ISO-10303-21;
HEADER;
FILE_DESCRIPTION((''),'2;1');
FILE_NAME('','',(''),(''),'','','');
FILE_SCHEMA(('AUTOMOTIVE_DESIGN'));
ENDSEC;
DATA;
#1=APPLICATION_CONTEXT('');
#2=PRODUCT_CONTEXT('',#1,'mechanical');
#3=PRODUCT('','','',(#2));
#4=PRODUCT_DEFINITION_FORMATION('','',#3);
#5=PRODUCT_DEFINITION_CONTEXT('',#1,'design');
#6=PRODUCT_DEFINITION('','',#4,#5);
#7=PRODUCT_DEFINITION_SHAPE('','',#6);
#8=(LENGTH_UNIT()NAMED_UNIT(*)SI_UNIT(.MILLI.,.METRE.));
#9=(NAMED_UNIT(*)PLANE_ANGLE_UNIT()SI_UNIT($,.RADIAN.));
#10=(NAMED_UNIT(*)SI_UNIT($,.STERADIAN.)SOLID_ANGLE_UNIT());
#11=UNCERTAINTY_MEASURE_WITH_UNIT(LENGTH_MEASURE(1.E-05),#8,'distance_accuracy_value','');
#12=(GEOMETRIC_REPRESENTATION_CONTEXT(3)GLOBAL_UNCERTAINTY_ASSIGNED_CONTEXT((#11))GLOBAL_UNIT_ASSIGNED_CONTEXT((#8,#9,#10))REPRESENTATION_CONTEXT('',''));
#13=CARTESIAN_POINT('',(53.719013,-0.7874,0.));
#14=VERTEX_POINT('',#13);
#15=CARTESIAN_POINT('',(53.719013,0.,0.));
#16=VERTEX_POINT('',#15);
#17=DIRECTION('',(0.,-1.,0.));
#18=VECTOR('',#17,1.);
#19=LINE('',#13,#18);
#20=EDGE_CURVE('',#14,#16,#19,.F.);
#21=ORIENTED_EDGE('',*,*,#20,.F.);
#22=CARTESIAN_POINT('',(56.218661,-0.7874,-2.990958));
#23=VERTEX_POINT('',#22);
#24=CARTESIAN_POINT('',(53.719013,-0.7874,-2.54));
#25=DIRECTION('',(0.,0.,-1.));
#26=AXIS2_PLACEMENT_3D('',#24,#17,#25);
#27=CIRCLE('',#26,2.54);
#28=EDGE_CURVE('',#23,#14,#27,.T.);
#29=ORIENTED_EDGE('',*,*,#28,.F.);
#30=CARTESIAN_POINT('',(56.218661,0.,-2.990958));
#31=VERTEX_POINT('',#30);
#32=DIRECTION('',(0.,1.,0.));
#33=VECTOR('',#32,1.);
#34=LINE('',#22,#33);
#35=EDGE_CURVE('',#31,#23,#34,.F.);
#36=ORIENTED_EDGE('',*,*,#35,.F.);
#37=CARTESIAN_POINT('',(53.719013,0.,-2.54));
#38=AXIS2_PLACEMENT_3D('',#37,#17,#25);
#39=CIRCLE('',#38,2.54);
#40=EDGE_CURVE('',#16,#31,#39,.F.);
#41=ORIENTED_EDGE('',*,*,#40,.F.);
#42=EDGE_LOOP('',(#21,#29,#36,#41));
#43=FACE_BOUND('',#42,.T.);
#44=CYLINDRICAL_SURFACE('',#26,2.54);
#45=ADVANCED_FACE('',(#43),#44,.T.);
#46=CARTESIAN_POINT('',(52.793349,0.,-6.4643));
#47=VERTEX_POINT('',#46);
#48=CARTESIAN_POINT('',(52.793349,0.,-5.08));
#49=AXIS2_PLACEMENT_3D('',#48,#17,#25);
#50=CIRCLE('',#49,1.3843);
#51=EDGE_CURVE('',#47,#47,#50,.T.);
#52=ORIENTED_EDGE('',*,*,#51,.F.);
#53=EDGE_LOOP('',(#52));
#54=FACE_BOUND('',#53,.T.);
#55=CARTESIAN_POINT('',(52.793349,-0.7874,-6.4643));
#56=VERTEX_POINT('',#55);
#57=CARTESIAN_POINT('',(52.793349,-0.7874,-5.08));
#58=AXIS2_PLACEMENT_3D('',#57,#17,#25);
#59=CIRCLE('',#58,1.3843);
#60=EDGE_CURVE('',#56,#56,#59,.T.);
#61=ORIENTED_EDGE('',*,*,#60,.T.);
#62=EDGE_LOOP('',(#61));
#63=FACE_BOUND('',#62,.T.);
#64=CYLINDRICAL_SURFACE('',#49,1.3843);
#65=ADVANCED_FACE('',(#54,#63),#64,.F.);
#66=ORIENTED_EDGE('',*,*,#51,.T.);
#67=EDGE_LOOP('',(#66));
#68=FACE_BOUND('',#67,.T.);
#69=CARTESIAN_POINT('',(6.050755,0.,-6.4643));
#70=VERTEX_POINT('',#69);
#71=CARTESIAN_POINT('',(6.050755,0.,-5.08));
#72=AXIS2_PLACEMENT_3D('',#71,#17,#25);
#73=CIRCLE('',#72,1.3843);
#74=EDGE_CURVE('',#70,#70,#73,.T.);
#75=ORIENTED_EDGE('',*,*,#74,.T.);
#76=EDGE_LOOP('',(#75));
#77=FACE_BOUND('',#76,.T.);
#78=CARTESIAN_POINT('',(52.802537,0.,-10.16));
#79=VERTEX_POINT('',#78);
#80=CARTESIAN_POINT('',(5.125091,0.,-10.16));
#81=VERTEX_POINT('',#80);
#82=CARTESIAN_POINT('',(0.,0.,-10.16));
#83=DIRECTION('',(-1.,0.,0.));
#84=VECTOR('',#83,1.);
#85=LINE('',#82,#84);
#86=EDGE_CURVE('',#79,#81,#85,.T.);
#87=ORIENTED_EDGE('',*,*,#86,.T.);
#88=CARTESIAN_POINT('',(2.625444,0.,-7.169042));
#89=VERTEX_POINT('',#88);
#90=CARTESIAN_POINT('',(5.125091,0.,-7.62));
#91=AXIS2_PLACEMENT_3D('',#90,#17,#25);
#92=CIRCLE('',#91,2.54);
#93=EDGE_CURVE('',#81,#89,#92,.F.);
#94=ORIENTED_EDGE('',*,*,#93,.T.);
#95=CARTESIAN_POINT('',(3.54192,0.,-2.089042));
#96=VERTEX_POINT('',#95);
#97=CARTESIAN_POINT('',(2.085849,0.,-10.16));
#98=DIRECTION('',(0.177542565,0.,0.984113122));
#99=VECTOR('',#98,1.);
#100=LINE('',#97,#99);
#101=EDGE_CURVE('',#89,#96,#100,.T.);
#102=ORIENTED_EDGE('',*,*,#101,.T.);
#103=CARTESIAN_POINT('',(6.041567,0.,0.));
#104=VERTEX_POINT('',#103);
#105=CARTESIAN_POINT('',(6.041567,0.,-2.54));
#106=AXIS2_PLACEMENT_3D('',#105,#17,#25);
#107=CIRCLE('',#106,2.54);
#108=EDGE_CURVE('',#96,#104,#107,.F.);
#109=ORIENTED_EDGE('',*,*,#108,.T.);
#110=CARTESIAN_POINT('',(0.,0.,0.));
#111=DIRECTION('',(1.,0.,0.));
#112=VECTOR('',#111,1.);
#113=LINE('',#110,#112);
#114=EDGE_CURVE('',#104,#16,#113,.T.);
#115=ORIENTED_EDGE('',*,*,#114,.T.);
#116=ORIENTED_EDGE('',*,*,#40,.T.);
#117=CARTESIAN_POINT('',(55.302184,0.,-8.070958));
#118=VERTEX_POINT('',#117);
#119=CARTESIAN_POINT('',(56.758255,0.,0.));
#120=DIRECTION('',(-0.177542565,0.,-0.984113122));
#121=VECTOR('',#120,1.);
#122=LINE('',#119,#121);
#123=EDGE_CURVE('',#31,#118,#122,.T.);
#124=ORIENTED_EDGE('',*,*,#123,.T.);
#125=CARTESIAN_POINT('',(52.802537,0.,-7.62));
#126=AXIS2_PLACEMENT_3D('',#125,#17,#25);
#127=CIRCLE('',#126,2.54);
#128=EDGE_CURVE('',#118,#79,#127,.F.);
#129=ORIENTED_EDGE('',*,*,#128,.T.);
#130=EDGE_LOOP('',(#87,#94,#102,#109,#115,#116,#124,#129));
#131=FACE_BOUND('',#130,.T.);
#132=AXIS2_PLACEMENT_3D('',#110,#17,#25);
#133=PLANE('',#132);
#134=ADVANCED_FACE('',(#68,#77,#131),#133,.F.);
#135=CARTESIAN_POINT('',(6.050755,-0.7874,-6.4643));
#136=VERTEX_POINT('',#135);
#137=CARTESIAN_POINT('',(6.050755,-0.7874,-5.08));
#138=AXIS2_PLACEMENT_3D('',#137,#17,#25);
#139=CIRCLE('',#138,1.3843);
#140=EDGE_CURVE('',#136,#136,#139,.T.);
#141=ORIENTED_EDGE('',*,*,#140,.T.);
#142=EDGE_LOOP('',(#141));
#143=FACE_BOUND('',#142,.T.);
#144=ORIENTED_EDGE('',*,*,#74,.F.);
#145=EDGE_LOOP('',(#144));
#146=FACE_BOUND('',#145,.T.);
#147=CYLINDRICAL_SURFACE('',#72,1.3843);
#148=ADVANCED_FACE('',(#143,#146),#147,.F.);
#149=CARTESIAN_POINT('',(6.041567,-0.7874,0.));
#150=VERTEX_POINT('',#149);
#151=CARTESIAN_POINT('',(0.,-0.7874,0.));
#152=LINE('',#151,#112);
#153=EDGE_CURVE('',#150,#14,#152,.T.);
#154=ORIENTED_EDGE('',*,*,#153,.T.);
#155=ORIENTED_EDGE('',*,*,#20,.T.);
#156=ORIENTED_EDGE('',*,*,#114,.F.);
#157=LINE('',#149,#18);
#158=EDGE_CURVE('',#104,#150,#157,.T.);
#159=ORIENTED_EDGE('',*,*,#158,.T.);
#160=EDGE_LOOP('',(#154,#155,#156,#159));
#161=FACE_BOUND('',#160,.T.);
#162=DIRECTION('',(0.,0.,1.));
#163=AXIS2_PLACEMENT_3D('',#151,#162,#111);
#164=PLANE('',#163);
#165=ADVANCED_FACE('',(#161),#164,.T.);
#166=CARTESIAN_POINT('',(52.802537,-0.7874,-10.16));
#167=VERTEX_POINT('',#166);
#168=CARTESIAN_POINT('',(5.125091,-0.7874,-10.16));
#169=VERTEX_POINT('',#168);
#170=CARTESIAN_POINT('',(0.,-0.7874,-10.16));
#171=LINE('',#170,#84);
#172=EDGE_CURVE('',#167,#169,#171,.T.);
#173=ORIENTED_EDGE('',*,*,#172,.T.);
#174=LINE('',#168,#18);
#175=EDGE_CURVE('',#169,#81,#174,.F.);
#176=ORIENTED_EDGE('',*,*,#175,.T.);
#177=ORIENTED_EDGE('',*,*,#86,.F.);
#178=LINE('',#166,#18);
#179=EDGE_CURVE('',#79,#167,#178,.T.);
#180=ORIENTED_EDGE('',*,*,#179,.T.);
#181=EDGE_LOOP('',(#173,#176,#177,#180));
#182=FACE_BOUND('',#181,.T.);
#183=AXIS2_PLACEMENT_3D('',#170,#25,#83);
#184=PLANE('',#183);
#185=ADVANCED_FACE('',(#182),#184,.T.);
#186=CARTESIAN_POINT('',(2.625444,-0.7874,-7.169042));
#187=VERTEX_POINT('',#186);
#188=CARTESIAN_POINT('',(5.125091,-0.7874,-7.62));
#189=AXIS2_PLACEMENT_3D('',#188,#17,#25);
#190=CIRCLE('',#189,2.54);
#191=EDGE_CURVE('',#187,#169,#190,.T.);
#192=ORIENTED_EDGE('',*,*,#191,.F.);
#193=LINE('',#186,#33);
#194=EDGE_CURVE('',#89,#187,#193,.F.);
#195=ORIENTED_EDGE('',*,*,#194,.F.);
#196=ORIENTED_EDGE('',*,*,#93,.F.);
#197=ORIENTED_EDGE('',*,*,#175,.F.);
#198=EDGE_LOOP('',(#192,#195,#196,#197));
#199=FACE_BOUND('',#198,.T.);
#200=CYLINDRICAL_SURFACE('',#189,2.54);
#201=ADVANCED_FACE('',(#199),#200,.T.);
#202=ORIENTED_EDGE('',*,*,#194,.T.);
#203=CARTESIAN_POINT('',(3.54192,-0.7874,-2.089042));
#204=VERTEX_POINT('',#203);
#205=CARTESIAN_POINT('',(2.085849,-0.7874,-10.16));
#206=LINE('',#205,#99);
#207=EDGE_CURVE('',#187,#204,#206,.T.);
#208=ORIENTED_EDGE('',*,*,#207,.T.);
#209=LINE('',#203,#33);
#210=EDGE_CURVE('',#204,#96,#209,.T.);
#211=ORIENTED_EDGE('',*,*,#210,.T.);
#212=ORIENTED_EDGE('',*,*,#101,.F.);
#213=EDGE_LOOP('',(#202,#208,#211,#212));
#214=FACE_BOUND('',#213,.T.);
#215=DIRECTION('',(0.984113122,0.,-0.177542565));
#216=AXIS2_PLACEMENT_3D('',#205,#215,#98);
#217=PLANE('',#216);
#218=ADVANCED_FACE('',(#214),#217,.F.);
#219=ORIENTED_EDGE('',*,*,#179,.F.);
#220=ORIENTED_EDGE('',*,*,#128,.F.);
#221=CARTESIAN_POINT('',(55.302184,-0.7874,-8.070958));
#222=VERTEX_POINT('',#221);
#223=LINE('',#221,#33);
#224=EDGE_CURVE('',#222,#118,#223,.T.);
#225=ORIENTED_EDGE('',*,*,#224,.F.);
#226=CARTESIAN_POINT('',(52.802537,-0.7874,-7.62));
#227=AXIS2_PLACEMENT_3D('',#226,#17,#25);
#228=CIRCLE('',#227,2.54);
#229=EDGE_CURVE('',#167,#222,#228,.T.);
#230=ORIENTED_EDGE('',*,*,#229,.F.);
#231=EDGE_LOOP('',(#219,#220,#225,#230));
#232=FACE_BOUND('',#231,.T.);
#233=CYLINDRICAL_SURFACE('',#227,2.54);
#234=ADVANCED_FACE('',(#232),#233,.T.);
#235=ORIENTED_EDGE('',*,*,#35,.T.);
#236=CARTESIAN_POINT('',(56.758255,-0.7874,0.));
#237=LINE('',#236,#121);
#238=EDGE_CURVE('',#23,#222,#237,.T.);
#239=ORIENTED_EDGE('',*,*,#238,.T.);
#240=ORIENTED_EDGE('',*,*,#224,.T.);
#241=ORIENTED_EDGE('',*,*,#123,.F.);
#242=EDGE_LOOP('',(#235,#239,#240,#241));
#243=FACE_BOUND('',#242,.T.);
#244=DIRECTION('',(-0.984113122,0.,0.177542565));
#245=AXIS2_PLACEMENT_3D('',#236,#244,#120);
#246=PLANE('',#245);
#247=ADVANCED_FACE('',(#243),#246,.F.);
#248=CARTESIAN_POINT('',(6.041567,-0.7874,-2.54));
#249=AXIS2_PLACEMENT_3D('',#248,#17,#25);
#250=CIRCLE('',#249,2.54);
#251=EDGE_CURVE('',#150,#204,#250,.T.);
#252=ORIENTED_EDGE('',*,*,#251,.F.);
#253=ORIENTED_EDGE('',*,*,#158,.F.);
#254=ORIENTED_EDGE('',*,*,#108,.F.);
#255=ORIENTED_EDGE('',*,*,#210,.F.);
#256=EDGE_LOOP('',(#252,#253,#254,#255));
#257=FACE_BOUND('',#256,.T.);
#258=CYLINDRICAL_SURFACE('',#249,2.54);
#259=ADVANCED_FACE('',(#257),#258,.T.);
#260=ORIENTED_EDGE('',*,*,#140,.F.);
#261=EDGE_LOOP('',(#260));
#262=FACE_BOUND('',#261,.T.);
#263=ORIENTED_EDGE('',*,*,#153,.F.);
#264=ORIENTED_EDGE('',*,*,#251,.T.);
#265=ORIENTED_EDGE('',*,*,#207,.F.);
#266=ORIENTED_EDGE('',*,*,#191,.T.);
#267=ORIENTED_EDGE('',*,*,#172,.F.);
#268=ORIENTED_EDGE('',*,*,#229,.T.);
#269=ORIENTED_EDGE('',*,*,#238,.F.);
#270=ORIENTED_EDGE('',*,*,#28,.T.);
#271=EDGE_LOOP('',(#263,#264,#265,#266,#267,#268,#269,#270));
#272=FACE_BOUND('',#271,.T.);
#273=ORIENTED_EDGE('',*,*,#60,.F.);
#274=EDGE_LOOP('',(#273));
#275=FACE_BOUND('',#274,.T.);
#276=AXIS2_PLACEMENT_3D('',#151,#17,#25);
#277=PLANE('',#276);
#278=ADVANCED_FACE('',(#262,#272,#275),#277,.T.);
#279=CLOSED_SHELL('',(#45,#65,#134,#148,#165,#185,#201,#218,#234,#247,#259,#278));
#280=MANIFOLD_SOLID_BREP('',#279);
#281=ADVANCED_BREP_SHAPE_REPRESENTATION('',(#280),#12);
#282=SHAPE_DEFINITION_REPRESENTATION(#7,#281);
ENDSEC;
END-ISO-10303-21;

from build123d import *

# Parameters (mm, degrees)
SKETCH1_W          = 58.648623675
SKETCH1_H          = 10.16
BASE_FLANGE1_DEPTH = 0.7874
SKETCH3_R          = 1.3843
CUT_EXTRUDE1_DEPTH = 60.527360581
CUT_EXTRUDE2_DEPTH = 60.527360581
FILLET1_R          = 2.54


# Sheet-metal steps are written as plain solids
with BuildPart() as part:
    # Sketch1 → Base-Flange1 (new body)
    with BuildSketch(Plane(origin=(0, 0, 0), x_dir=(1, 0, 0), z_dir=(0, 1, 0))):
        with Locations((29.324311838, 5.08)):
            Rectangle(SKETCH1_W, SKETCH1_H)
    extrude(amount=-BASE_FLANGE1_DEPTH)

    # Sketch3 → Cut-Extrude1 (cut, through all)
    with BuildSketch(Plane.XZ.offset(0.7874)):
        with Locations(Location((52.793349192, -5.08, 0), (0, 0, 270))):
            Circle(SKETCH3_R)
        with Locations(Location((6.050755325, -5.08, 0), (0, 0, 270))):
            Circle(SKETCH3_R)
    extrude(amount=-CUT_EXTRUDE1_DEPTH, mode=Mode.SUBTRACT)

    # Sketch4 → Cut-Extrude2 (cut, through all)
    with BuildSketch(Plane.XZ.offset(0.7874)):
        Polygon((54.925303053, -10.16), (58.648623675, -10.16), (58.648623675, 0), (56.758255401, 0), align=None)
        Polygon((2.085849116, -10.16), (0, -10.16), (0, 0), (3.918801464, 0), align=None)
    extrude(amount=-CUT_EXTRUDE2_DEPTH, mode=Mode.SUBTRACT)

    # Fillet1
    fillet1_edges = [part.edges().sort_by_distance(p)[0] for p in [
        (3.918801464, -0.3937, 0),
        (2.085849116, -0.3937, -10.16),
        (54.925303053, -0.3937, -10.16),
        (56.758255401, -0.3937, 0),
    ]]
    fillet(fillet1_edges, radius=FILLET1_R)


solid = part.part
